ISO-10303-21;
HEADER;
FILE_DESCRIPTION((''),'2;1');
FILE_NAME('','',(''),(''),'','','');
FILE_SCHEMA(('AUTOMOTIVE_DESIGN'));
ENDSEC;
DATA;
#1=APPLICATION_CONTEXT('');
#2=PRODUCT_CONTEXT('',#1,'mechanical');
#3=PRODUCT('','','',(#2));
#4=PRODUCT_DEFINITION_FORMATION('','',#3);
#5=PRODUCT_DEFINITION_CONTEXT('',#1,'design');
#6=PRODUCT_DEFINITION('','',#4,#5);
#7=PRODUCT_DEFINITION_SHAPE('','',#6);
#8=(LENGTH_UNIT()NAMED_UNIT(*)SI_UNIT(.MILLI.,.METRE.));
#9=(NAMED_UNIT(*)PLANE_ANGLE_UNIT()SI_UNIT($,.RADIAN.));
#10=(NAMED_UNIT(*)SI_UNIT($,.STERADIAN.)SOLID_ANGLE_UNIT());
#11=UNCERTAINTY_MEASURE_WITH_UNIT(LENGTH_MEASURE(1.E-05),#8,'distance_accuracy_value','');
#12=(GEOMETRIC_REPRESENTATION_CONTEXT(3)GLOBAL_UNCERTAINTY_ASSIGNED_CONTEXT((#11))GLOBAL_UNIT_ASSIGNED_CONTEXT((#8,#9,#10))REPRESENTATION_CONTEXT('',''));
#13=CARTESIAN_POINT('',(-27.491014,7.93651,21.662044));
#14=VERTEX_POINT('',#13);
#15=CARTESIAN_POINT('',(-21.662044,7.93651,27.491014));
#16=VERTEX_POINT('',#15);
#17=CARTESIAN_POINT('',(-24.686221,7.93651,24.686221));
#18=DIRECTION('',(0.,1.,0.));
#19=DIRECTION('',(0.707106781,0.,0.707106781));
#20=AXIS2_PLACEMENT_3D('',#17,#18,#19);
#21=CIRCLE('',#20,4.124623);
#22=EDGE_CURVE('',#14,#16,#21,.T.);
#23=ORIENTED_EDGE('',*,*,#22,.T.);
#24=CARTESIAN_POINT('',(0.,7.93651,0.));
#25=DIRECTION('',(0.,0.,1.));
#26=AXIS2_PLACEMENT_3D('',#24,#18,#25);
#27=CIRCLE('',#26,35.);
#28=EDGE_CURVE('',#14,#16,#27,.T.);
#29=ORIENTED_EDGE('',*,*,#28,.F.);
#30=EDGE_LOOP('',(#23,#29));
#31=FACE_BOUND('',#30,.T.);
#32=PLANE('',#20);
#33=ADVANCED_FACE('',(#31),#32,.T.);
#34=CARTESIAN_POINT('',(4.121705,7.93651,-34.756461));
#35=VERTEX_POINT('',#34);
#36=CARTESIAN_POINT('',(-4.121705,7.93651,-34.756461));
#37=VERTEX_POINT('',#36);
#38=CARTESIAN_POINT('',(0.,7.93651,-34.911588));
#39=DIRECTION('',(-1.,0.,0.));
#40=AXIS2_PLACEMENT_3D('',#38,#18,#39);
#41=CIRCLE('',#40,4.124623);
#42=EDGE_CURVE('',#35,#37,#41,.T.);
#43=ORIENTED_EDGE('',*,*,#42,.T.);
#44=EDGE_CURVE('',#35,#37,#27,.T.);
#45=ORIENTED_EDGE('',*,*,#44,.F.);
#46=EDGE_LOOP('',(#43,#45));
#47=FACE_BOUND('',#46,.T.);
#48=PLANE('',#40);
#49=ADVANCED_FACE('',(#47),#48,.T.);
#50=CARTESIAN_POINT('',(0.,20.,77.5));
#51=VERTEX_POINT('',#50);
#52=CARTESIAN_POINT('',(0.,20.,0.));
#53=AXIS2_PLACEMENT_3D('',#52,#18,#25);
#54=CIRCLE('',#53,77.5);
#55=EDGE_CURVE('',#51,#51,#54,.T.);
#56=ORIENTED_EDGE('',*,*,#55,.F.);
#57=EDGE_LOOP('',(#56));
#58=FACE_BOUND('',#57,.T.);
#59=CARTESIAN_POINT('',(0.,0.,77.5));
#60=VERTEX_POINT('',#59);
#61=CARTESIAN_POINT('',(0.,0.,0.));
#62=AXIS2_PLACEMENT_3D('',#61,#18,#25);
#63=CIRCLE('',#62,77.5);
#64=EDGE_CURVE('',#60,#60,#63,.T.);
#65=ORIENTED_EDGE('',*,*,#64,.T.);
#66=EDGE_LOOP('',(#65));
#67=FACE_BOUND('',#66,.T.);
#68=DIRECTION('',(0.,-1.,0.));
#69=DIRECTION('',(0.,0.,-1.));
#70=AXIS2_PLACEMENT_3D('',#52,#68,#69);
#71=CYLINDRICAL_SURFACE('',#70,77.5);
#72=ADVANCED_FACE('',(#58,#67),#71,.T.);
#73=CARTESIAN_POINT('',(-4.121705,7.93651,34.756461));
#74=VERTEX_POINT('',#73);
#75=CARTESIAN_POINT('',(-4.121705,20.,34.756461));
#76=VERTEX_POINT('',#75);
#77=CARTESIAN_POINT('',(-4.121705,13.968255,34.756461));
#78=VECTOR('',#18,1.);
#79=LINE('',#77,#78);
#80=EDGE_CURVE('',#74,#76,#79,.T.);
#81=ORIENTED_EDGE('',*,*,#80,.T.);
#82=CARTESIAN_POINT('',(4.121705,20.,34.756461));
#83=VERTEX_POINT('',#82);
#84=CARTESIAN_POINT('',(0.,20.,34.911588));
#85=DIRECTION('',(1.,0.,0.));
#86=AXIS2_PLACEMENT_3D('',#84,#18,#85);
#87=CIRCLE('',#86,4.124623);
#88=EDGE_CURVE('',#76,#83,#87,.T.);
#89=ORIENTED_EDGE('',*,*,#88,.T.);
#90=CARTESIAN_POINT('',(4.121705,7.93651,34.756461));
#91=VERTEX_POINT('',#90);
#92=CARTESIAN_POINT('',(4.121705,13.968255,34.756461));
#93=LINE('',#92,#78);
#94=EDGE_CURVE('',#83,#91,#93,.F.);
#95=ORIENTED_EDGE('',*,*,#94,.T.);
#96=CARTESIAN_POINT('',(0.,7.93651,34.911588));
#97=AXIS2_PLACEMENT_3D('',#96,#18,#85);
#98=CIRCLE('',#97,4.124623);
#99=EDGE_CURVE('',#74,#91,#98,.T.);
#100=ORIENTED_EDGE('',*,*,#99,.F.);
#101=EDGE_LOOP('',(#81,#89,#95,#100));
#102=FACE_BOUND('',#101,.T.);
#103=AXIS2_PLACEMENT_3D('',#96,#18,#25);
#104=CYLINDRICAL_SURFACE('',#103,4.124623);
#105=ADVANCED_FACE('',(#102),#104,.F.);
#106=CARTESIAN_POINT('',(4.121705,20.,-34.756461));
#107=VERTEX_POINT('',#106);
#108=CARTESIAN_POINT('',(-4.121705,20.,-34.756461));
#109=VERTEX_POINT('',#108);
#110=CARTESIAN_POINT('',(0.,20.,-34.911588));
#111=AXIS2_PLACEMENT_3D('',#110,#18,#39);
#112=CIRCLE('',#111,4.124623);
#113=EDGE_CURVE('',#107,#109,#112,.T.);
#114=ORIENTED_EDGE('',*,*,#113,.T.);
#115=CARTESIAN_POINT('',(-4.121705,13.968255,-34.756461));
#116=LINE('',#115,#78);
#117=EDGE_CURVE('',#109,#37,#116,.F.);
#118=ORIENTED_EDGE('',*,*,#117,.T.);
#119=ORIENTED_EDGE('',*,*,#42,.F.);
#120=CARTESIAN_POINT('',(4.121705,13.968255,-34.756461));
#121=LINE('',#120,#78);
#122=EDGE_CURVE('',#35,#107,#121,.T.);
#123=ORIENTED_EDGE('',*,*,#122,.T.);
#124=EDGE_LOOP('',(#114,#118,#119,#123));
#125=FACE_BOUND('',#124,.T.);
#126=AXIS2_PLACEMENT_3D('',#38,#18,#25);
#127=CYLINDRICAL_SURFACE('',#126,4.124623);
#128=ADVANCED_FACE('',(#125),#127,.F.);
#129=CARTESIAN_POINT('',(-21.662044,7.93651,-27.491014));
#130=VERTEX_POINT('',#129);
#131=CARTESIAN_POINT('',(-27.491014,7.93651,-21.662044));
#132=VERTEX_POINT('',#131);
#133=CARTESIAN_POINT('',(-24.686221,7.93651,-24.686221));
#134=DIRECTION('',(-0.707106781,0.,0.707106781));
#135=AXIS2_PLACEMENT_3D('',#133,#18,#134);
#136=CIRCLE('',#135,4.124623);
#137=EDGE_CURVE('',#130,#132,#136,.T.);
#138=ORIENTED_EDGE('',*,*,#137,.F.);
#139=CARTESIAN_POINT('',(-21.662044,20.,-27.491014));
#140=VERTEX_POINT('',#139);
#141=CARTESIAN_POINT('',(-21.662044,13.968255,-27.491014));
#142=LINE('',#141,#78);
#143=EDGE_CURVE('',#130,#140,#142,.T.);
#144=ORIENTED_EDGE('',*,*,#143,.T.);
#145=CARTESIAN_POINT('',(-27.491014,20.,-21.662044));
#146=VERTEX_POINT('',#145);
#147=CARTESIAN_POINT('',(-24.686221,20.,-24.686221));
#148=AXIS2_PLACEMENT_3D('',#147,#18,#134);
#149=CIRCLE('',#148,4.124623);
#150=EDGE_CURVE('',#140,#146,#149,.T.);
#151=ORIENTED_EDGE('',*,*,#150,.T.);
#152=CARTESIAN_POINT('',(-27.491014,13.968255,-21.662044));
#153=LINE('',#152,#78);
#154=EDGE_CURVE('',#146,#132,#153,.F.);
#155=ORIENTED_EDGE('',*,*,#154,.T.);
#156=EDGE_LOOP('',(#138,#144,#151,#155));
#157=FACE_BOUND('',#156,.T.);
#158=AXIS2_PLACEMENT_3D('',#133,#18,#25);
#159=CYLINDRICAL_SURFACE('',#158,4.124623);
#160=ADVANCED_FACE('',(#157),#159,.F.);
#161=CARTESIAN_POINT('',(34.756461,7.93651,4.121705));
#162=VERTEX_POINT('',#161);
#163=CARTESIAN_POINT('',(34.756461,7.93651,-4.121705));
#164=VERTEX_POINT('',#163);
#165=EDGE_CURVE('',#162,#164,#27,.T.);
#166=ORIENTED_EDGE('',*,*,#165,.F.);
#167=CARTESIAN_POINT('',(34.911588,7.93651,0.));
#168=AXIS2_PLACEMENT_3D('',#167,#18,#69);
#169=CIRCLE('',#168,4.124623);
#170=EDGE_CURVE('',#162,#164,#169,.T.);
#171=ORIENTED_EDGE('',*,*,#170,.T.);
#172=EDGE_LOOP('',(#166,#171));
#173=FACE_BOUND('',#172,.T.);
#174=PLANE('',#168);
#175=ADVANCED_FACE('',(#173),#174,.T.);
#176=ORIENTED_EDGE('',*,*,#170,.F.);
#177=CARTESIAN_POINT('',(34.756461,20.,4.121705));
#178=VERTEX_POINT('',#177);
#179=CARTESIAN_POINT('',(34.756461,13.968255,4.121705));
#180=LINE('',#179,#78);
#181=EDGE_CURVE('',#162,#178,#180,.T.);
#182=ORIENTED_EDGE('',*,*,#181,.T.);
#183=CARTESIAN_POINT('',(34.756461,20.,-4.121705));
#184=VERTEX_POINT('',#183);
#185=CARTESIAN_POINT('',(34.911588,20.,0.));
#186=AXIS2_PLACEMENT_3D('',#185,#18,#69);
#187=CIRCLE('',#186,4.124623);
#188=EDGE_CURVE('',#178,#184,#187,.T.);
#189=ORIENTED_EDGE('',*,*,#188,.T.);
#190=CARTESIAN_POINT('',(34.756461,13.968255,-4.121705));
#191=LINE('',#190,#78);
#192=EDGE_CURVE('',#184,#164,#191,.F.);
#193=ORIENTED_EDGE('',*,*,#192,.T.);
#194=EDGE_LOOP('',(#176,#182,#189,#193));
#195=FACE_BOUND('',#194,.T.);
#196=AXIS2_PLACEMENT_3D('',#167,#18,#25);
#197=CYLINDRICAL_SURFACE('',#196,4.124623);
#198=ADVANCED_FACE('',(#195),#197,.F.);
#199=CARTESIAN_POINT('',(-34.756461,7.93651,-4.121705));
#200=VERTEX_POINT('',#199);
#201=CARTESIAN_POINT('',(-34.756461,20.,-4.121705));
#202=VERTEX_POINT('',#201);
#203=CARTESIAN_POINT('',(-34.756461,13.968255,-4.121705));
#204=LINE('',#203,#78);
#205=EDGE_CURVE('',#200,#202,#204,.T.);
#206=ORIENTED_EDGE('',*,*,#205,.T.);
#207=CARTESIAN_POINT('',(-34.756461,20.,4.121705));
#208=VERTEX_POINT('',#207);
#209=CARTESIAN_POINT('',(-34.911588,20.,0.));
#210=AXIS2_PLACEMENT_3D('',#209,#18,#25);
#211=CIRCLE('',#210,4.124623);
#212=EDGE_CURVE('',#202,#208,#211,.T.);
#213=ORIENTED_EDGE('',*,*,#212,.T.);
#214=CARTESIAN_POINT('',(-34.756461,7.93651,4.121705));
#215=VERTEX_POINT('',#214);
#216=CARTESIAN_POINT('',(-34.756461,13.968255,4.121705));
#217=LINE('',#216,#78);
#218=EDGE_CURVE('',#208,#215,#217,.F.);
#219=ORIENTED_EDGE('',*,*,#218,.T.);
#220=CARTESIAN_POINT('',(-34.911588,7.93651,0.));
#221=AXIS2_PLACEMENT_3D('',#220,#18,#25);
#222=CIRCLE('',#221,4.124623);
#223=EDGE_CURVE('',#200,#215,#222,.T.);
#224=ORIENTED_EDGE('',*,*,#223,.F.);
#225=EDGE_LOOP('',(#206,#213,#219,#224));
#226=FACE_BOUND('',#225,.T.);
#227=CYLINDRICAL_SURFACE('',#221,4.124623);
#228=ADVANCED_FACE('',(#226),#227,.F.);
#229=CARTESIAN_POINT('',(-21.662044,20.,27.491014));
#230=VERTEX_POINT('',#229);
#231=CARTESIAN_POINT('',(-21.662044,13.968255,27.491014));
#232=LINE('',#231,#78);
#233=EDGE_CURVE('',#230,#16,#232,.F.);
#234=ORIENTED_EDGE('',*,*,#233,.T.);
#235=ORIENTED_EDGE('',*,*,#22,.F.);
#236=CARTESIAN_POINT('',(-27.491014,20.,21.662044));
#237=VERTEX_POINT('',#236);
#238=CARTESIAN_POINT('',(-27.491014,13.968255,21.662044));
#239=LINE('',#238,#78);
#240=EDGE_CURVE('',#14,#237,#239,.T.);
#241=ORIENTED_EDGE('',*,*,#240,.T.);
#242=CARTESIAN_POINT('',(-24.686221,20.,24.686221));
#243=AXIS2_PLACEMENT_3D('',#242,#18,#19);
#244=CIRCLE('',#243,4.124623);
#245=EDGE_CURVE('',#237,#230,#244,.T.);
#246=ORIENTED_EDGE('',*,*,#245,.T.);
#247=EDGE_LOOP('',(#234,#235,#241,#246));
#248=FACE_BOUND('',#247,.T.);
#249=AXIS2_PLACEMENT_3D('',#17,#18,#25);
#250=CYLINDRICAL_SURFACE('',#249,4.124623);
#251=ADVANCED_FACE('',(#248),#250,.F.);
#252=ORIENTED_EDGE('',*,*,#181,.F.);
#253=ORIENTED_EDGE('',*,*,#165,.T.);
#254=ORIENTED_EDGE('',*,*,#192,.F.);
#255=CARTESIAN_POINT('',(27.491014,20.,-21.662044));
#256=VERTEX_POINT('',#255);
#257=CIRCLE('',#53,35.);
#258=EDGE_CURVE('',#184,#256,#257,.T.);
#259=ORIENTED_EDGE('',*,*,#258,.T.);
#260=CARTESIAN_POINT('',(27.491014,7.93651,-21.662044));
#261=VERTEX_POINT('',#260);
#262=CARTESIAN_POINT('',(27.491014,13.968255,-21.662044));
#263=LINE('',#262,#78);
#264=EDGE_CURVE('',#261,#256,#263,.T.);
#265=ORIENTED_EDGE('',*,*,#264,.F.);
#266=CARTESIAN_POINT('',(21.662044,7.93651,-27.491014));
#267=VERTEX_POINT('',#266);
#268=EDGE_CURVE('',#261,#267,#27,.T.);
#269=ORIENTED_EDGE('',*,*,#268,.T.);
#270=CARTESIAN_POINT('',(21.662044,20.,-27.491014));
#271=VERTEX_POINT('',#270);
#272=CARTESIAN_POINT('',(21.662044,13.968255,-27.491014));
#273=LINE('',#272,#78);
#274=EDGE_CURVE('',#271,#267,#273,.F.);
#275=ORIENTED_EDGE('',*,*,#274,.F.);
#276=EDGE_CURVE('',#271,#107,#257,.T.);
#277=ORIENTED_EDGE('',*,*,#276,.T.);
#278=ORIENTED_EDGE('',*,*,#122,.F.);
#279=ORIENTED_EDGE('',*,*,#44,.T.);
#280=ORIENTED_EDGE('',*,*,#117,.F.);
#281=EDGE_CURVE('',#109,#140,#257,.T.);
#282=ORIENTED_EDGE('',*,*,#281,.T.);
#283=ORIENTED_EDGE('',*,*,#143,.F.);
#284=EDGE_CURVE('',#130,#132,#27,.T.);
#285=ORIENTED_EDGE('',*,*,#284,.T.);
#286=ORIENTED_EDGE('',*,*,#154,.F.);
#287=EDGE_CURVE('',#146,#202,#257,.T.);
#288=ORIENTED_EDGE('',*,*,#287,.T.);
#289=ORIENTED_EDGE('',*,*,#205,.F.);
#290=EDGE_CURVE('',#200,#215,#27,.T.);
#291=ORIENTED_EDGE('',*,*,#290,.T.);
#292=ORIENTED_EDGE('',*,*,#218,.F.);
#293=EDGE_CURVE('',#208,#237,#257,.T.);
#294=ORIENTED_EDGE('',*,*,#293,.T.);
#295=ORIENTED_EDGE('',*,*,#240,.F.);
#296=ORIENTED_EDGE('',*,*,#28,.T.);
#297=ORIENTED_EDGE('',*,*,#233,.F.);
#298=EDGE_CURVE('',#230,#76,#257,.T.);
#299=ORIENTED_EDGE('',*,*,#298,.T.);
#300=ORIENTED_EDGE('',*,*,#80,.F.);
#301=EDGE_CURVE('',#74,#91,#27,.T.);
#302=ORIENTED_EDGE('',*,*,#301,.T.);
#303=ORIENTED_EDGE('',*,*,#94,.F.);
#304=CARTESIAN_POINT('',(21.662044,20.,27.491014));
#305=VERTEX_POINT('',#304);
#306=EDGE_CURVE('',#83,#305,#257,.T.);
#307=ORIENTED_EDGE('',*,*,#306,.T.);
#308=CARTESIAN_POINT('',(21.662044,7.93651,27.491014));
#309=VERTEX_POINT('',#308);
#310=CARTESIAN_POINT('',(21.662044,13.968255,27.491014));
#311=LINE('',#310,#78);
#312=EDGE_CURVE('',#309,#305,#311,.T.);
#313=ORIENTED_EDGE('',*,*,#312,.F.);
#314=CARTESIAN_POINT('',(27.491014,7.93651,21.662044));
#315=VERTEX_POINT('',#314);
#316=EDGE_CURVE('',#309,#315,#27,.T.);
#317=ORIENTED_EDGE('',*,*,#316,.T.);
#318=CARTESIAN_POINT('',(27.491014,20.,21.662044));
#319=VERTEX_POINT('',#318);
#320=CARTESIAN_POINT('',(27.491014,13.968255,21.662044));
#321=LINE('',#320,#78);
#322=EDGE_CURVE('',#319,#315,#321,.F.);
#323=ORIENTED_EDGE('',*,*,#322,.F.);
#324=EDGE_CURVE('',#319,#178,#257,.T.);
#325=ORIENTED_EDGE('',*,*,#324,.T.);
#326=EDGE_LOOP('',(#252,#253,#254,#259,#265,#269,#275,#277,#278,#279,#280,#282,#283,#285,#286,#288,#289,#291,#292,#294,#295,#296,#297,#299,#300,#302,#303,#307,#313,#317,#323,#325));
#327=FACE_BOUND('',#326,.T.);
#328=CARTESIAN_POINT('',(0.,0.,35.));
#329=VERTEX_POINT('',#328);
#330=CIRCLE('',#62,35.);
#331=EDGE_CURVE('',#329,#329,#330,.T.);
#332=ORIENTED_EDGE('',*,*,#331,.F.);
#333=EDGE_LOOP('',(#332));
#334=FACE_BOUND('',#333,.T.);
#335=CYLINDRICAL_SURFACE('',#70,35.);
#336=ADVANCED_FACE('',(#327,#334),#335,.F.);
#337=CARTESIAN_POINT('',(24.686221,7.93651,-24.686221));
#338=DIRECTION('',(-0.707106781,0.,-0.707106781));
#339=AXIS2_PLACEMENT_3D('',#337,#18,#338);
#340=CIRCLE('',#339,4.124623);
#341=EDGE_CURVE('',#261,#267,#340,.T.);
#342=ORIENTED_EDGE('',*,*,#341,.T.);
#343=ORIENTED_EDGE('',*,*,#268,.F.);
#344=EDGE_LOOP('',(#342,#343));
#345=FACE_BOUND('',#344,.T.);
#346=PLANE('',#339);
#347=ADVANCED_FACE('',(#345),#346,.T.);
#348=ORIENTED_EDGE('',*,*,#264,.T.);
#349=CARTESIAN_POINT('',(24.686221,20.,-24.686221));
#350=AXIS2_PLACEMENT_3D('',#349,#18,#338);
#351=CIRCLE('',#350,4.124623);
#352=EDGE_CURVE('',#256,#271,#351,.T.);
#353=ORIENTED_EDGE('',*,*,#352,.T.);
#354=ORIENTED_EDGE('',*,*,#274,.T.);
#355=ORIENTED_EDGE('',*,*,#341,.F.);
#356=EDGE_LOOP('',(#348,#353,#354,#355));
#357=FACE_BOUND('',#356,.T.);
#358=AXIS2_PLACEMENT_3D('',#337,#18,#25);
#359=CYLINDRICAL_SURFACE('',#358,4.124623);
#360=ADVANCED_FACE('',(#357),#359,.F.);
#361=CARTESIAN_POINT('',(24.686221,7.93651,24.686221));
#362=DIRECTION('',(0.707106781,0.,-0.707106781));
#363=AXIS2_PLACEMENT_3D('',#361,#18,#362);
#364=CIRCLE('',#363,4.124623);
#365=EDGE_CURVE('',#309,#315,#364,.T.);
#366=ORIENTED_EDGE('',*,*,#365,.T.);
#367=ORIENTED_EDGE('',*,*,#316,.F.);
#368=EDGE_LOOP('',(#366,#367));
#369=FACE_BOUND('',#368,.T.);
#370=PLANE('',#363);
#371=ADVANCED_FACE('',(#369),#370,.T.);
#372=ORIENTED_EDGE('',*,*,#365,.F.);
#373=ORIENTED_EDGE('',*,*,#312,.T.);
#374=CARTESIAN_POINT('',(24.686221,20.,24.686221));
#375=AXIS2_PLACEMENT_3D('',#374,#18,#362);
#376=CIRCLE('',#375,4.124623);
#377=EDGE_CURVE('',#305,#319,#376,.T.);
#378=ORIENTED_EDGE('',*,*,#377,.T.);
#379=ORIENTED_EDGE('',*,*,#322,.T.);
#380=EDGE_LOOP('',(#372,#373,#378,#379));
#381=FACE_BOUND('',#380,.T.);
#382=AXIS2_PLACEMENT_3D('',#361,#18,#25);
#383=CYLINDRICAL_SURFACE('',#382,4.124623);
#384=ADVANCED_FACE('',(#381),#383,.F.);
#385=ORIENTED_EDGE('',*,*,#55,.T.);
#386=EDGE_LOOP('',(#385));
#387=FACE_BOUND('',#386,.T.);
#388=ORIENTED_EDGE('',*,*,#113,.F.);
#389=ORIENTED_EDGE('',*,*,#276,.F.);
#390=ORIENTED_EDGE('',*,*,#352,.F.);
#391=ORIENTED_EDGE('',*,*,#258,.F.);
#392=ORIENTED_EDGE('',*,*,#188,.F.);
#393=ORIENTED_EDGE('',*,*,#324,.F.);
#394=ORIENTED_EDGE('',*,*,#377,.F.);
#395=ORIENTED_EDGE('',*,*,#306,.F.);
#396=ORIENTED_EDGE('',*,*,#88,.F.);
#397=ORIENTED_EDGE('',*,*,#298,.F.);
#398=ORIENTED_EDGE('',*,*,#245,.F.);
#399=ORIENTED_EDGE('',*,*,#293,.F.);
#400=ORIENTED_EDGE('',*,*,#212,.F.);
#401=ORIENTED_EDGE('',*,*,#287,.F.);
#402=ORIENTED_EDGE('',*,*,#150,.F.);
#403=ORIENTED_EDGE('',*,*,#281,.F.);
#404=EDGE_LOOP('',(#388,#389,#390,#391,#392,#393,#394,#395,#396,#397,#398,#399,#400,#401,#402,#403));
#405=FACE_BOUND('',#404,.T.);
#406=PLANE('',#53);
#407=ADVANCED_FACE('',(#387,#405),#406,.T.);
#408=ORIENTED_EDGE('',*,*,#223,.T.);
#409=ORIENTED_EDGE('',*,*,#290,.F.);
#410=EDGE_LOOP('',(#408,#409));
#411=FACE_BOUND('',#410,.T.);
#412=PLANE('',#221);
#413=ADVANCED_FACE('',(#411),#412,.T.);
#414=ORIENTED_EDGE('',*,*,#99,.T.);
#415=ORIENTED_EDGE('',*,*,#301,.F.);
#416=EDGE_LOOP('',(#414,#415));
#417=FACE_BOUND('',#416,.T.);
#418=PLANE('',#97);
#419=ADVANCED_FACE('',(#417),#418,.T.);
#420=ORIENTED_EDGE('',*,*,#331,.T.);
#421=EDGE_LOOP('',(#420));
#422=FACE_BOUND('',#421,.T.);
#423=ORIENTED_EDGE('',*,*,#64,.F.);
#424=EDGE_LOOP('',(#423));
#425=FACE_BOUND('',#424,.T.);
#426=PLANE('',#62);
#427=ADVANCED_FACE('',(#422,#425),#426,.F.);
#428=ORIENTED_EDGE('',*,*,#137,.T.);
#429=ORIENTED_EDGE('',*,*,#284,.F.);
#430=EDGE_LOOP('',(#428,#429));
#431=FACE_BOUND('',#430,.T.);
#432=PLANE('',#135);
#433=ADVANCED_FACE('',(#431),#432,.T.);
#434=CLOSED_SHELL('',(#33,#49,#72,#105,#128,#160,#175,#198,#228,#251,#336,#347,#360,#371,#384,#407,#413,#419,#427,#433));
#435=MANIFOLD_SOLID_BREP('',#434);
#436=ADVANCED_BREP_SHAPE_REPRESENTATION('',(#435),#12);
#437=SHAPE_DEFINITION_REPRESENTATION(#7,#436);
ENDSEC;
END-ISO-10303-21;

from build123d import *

# Parameters (mm, degrees)
SKETCH1_R           = 77.5
BOSS_EXTRUDE1_DEPTH = 20
SKETCH2_R           = 35
CUT_EXTRUDE1_DEPTH  = 112.411399776
SKETCH3_R           = 4.124622737
CUT_EXTRUDE2_DEPTH  = 12.063490207
CIRPATTERN1_COUNT   = 8


with BuildPart() as part:
    # Sketch1 → Boss-Extrude1 (new body)
    with BuildSketch(Plane(origin=(0, 0, 0), x_dir=(1, 0, 0), z_dir=(0, 1, 0))):
        Circle(SKETCH1_R)
    extrude(amount=BOSS_EXTRUDE1_DEPTH)

    # Sketch2 → Cut-Extrude1 (cut, through all)
    with BuildSketch(Plane(origin=(0, 0, 0), x_dir=(1, 0, 0), z_dir=(0, 1, 0))):
        Circle(SKETCH2_R)
    extrude(amount=CUT_EXTRUDE1_DEPTH, mode=Mode.SUBTRACT)

    # Sketch3 → Cut-Extrude2 (cut)
    with BuildSketch(Plane(origin=(0, 20, 0), x_dir=(1, 0, 0), z_dir=(0, 1, 0))):
        with Locations((-34.911588421, 0)):
            Circle(SKETCH3_R)
    cut_extrude2 = extrude(amount=-CUT_EXTRUDE2_DEPTH, mode=Mode.SUBTRACT)

    # CirPattern1: Cut-Extrude2 ×8 about axis
    cirpattern1_axis = Axis((0, 0, 0), (0, 1, 0))
    for i in range(1, CIRPATTERN1_COUNT):
        add(cut_extrude2.rotate(cirpattern1_axis, i * 360 / CIRPATTERN1_COUNT), mode=Mode.SUBTRACT)


solid = part.part
